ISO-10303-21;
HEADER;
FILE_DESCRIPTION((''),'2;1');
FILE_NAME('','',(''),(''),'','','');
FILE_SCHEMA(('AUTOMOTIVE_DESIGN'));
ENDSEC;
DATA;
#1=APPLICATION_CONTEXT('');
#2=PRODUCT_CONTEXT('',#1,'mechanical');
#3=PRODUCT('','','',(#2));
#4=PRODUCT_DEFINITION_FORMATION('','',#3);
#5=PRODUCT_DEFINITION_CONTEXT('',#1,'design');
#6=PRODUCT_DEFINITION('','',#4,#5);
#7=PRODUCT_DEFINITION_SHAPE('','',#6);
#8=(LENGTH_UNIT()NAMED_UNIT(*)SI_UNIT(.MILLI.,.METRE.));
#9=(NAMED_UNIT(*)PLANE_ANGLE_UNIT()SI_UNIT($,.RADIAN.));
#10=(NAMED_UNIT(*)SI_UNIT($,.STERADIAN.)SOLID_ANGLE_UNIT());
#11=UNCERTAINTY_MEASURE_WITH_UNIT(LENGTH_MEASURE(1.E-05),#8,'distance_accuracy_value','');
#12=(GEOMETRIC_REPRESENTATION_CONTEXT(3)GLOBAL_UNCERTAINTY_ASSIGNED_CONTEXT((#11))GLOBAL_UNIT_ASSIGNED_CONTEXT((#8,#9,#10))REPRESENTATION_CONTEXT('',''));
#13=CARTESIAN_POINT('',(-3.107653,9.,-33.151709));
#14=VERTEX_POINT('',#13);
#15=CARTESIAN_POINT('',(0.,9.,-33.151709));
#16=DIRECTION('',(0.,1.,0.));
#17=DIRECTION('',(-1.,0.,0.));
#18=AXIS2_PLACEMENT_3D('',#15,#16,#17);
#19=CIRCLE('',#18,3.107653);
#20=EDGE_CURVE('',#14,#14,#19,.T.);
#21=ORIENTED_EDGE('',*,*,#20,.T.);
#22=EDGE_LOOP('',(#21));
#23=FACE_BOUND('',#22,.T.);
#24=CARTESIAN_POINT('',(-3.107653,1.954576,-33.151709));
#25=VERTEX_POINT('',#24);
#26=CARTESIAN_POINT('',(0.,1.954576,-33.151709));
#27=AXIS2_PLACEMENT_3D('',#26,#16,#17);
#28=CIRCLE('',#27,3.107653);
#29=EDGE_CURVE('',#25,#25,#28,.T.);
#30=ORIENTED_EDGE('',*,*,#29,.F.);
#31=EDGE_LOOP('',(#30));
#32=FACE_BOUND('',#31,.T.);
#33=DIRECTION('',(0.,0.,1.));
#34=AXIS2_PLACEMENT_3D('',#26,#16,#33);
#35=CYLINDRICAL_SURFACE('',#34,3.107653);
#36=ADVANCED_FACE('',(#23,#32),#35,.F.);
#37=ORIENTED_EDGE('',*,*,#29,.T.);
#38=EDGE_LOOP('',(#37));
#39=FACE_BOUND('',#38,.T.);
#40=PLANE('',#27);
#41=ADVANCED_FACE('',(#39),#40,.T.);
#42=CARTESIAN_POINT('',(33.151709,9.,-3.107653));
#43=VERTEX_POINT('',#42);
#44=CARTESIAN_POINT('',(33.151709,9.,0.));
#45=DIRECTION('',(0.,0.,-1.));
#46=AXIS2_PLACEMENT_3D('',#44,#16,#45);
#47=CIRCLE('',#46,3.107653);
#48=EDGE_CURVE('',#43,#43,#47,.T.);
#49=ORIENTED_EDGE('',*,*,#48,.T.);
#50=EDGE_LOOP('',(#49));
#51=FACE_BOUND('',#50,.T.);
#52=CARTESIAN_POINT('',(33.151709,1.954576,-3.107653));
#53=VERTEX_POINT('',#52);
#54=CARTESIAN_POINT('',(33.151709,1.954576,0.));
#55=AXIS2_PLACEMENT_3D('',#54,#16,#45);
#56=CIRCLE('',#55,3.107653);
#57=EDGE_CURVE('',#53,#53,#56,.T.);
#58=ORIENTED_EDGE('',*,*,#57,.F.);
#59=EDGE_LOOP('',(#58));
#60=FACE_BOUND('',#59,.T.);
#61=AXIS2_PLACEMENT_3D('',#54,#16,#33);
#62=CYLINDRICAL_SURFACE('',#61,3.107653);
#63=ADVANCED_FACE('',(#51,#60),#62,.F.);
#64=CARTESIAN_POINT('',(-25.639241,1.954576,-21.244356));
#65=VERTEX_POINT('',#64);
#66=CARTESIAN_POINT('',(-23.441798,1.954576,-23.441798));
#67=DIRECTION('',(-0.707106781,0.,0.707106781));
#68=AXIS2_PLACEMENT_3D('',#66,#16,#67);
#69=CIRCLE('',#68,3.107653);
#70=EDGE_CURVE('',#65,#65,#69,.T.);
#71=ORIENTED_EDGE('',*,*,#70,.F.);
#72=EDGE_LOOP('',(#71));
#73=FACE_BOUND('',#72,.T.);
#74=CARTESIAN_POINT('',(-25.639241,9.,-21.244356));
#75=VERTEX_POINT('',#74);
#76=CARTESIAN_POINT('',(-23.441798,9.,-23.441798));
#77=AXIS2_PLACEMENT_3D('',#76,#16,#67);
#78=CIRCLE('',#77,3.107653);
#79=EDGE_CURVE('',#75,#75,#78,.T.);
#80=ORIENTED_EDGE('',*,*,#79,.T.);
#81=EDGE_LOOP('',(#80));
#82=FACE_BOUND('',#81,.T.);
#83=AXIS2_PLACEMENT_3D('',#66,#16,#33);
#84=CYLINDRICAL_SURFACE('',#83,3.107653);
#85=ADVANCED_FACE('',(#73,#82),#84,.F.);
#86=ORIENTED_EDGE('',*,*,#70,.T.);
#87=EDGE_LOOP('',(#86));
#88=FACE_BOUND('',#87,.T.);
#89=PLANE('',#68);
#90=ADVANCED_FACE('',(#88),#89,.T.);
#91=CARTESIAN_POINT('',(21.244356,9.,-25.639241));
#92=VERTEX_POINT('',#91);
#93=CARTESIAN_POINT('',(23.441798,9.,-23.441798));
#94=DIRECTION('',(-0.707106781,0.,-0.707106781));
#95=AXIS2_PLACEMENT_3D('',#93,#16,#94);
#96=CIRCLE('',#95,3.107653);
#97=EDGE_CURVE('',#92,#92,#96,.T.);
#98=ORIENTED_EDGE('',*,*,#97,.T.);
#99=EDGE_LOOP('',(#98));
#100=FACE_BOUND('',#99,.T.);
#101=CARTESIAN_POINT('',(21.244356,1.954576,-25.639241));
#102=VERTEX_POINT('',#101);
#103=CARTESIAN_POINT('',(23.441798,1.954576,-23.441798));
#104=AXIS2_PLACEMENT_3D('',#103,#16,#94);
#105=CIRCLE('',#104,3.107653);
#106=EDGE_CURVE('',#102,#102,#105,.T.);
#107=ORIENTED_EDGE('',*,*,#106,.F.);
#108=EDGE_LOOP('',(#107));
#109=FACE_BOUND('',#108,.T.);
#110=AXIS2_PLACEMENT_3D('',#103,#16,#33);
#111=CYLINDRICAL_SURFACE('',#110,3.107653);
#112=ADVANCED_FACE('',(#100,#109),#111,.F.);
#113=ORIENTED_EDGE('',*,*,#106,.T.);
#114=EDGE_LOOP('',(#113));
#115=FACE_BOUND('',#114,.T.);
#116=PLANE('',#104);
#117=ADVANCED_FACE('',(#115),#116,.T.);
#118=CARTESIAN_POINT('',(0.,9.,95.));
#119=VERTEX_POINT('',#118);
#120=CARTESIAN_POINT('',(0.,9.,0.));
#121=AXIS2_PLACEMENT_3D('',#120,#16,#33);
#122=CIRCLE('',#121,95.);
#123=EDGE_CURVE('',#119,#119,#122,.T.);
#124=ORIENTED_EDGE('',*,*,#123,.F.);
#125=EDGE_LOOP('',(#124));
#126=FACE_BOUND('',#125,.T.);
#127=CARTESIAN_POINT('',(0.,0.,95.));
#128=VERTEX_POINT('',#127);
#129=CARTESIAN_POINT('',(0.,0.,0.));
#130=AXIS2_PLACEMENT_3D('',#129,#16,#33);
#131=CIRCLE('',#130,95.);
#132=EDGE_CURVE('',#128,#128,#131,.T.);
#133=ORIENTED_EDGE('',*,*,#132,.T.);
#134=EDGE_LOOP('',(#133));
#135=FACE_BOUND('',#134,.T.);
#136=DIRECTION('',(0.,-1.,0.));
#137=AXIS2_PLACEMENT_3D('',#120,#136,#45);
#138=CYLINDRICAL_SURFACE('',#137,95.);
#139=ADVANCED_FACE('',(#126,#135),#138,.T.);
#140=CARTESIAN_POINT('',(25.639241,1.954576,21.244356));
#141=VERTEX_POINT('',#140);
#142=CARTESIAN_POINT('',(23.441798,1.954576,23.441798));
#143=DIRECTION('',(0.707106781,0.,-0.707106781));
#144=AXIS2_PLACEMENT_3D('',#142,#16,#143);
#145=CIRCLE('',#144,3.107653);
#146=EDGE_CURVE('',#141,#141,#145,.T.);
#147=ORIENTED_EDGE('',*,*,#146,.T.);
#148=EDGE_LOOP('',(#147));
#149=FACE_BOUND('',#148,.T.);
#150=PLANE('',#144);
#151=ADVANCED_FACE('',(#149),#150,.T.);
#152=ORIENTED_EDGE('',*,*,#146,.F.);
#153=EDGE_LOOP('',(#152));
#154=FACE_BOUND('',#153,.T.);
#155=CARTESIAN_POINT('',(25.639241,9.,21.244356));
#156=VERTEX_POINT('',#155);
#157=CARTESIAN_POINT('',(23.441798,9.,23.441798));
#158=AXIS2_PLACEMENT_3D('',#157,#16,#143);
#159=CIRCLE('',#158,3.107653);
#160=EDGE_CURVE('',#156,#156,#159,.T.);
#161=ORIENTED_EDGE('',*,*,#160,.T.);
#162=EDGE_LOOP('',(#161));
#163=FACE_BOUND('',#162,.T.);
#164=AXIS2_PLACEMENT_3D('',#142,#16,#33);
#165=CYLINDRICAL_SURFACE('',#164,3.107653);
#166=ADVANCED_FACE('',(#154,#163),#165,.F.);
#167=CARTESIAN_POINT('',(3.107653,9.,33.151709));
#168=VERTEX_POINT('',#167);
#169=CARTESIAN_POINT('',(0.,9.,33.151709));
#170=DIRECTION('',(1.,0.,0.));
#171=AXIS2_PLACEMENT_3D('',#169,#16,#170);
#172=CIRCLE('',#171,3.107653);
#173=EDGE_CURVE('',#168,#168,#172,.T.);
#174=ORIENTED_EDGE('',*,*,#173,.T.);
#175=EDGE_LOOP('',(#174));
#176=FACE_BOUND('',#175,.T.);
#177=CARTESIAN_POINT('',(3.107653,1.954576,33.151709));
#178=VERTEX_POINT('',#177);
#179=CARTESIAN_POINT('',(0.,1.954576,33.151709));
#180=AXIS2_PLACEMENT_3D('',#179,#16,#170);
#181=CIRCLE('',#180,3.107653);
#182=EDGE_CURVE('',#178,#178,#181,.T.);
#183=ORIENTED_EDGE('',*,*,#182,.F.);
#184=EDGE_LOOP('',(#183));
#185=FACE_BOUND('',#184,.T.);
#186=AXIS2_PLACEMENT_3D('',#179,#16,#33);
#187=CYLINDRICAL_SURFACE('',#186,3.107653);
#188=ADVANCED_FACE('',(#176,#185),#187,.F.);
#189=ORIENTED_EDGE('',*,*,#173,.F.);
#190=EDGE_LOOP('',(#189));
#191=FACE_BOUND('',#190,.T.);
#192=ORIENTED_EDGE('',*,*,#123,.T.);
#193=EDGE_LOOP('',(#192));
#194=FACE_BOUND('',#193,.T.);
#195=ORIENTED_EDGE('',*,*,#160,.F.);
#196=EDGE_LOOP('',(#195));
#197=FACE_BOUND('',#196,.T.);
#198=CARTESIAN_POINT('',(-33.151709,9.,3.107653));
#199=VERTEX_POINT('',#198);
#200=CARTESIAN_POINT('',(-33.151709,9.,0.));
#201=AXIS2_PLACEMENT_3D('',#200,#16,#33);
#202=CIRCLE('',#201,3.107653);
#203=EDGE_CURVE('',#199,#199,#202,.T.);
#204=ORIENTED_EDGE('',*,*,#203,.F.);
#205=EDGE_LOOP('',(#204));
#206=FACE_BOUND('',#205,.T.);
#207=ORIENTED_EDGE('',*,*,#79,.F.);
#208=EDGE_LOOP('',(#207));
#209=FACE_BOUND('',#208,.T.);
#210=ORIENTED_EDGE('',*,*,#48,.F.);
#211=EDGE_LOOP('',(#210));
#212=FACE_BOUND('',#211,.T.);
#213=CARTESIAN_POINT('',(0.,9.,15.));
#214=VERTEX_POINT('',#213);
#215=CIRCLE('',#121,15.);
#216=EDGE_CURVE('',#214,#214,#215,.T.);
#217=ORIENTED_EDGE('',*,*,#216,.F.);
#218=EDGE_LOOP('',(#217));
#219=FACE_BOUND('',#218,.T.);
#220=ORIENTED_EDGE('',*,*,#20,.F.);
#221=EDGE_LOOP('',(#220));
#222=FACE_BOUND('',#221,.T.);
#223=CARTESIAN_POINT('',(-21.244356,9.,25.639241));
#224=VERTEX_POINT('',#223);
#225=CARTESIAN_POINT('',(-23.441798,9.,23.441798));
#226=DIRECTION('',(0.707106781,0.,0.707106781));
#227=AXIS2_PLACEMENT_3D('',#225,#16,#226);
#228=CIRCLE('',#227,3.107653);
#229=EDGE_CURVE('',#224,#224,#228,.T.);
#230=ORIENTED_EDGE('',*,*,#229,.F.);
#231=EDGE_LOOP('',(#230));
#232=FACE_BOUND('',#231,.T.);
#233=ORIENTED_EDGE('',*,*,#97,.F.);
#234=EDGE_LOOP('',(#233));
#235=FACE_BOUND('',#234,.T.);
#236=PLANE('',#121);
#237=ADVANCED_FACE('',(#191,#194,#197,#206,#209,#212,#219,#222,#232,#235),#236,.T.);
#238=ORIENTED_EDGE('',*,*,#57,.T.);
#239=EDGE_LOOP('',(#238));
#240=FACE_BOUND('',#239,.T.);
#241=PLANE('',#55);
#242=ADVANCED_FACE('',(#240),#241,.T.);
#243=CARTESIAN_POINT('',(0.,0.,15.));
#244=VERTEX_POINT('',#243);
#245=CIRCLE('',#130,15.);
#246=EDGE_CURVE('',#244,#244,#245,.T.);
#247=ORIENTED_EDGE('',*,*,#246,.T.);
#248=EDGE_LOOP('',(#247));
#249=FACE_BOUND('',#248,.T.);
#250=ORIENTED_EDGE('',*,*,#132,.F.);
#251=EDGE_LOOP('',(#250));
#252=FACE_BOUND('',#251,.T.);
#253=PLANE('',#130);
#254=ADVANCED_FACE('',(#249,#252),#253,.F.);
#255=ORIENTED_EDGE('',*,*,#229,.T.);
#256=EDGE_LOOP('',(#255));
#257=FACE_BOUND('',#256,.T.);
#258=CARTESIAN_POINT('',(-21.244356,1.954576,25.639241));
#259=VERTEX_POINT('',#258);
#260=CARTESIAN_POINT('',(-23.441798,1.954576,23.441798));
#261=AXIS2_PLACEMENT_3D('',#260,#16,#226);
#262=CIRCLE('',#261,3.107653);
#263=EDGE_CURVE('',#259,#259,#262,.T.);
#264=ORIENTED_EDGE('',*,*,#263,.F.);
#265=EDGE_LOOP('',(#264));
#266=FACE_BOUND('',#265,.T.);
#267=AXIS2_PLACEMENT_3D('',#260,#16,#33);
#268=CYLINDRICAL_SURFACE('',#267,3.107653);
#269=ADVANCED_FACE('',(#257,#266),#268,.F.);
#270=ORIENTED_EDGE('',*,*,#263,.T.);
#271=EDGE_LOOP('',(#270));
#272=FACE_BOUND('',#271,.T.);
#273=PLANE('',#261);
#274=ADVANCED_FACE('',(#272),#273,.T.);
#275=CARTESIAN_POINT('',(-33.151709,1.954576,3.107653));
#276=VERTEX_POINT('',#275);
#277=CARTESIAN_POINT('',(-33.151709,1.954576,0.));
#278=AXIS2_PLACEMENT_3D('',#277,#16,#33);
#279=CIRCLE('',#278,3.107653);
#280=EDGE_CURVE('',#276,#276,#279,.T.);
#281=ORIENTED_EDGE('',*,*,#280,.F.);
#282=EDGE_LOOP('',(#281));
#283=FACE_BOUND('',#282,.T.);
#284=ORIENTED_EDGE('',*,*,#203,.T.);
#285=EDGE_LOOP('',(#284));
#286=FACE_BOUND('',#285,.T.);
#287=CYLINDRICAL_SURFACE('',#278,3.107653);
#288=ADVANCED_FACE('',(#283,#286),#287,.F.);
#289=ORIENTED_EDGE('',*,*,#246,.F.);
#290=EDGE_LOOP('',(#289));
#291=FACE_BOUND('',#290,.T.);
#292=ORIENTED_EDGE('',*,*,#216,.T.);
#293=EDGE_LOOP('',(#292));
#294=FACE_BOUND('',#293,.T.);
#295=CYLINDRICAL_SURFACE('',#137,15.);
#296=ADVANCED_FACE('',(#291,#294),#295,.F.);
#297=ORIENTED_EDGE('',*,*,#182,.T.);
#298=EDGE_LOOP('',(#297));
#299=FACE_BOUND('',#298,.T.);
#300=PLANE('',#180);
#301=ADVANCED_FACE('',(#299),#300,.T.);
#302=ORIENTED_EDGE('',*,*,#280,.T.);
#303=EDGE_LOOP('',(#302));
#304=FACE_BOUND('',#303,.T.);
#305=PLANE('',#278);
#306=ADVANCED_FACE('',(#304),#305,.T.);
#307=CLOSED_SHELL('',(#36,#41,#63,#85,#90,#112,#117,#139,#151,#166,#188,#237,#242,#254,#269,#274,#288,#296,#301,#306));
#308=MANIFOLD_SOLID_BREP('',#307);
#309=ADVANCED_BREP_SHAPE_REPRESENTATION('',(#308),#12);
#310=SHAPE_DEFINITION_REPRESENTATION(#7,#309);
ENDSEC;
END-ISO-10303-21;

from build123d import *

# Parameters (mm, degrees)
SKETCH1_R           = 95
BOSS_EXTRUDE1_DEPTH = 9
SKETCH2_R           = 15
CUT_EXTRUDE1_DEPTH  = 135.651401775
SKETCH3_R           = 3.107652879
CUT_EXTRUDE2_DEPTH  = 7.045423675
CIRPATTERN1_COUNT   = 8


with BuildPart() as part:
    # Sketch1 → Boss-Extrude1 (new body)
    with BuildSketch(Plane(origin=(0, 0, 0), x_dir=(1, 0, 0), z_dir=(0, 1, 0))):
        Circle(SKETCH1_R)
    extrude(amount=BOSS_EXTRUDE1_DEPTH)

    # Sketch2 → Cut-Extrude1 (cut, through all)
    with BuildSketch(Plane(origin=(0, 0, 0), x_dir=(1, 0, 0), z_dir=(0, 1, 0))):
        Circle(SKETCH2_R)
    extrude(amount=CUT_EXTRUDE1_DEPTH, mode=Mode.SUBTRACT)

    # Sketch3 → Cut-Extrude2 (cut)
    with BuildSketch(Plane(origin=(0, 9, 0), x_dir=(1, 0, 0), z_dir=(0, 1, 0))):
        with Locations((-33.15170901, 0)):
            Circle(SKETCH3_R)
    cut_extrude2 = extrude(amount=-CUT_EXTRUDE2_DEPTH, mode=Mode.SUBTRACT)

    # CirPattern1: Cut-Extrude2 ×8 about axis
    cirpattern1_axis = Axis((0, 0, 0), (0, 1, 0))
    for i in range(1, CIRPATTERN1_COUNT):
        add(cut_extrude2.rotate(cirpattern1_axis, i * 360 / CIRPATTERN1_COUNT), mode=Mode.SUBTRACT)


solid = part.part
